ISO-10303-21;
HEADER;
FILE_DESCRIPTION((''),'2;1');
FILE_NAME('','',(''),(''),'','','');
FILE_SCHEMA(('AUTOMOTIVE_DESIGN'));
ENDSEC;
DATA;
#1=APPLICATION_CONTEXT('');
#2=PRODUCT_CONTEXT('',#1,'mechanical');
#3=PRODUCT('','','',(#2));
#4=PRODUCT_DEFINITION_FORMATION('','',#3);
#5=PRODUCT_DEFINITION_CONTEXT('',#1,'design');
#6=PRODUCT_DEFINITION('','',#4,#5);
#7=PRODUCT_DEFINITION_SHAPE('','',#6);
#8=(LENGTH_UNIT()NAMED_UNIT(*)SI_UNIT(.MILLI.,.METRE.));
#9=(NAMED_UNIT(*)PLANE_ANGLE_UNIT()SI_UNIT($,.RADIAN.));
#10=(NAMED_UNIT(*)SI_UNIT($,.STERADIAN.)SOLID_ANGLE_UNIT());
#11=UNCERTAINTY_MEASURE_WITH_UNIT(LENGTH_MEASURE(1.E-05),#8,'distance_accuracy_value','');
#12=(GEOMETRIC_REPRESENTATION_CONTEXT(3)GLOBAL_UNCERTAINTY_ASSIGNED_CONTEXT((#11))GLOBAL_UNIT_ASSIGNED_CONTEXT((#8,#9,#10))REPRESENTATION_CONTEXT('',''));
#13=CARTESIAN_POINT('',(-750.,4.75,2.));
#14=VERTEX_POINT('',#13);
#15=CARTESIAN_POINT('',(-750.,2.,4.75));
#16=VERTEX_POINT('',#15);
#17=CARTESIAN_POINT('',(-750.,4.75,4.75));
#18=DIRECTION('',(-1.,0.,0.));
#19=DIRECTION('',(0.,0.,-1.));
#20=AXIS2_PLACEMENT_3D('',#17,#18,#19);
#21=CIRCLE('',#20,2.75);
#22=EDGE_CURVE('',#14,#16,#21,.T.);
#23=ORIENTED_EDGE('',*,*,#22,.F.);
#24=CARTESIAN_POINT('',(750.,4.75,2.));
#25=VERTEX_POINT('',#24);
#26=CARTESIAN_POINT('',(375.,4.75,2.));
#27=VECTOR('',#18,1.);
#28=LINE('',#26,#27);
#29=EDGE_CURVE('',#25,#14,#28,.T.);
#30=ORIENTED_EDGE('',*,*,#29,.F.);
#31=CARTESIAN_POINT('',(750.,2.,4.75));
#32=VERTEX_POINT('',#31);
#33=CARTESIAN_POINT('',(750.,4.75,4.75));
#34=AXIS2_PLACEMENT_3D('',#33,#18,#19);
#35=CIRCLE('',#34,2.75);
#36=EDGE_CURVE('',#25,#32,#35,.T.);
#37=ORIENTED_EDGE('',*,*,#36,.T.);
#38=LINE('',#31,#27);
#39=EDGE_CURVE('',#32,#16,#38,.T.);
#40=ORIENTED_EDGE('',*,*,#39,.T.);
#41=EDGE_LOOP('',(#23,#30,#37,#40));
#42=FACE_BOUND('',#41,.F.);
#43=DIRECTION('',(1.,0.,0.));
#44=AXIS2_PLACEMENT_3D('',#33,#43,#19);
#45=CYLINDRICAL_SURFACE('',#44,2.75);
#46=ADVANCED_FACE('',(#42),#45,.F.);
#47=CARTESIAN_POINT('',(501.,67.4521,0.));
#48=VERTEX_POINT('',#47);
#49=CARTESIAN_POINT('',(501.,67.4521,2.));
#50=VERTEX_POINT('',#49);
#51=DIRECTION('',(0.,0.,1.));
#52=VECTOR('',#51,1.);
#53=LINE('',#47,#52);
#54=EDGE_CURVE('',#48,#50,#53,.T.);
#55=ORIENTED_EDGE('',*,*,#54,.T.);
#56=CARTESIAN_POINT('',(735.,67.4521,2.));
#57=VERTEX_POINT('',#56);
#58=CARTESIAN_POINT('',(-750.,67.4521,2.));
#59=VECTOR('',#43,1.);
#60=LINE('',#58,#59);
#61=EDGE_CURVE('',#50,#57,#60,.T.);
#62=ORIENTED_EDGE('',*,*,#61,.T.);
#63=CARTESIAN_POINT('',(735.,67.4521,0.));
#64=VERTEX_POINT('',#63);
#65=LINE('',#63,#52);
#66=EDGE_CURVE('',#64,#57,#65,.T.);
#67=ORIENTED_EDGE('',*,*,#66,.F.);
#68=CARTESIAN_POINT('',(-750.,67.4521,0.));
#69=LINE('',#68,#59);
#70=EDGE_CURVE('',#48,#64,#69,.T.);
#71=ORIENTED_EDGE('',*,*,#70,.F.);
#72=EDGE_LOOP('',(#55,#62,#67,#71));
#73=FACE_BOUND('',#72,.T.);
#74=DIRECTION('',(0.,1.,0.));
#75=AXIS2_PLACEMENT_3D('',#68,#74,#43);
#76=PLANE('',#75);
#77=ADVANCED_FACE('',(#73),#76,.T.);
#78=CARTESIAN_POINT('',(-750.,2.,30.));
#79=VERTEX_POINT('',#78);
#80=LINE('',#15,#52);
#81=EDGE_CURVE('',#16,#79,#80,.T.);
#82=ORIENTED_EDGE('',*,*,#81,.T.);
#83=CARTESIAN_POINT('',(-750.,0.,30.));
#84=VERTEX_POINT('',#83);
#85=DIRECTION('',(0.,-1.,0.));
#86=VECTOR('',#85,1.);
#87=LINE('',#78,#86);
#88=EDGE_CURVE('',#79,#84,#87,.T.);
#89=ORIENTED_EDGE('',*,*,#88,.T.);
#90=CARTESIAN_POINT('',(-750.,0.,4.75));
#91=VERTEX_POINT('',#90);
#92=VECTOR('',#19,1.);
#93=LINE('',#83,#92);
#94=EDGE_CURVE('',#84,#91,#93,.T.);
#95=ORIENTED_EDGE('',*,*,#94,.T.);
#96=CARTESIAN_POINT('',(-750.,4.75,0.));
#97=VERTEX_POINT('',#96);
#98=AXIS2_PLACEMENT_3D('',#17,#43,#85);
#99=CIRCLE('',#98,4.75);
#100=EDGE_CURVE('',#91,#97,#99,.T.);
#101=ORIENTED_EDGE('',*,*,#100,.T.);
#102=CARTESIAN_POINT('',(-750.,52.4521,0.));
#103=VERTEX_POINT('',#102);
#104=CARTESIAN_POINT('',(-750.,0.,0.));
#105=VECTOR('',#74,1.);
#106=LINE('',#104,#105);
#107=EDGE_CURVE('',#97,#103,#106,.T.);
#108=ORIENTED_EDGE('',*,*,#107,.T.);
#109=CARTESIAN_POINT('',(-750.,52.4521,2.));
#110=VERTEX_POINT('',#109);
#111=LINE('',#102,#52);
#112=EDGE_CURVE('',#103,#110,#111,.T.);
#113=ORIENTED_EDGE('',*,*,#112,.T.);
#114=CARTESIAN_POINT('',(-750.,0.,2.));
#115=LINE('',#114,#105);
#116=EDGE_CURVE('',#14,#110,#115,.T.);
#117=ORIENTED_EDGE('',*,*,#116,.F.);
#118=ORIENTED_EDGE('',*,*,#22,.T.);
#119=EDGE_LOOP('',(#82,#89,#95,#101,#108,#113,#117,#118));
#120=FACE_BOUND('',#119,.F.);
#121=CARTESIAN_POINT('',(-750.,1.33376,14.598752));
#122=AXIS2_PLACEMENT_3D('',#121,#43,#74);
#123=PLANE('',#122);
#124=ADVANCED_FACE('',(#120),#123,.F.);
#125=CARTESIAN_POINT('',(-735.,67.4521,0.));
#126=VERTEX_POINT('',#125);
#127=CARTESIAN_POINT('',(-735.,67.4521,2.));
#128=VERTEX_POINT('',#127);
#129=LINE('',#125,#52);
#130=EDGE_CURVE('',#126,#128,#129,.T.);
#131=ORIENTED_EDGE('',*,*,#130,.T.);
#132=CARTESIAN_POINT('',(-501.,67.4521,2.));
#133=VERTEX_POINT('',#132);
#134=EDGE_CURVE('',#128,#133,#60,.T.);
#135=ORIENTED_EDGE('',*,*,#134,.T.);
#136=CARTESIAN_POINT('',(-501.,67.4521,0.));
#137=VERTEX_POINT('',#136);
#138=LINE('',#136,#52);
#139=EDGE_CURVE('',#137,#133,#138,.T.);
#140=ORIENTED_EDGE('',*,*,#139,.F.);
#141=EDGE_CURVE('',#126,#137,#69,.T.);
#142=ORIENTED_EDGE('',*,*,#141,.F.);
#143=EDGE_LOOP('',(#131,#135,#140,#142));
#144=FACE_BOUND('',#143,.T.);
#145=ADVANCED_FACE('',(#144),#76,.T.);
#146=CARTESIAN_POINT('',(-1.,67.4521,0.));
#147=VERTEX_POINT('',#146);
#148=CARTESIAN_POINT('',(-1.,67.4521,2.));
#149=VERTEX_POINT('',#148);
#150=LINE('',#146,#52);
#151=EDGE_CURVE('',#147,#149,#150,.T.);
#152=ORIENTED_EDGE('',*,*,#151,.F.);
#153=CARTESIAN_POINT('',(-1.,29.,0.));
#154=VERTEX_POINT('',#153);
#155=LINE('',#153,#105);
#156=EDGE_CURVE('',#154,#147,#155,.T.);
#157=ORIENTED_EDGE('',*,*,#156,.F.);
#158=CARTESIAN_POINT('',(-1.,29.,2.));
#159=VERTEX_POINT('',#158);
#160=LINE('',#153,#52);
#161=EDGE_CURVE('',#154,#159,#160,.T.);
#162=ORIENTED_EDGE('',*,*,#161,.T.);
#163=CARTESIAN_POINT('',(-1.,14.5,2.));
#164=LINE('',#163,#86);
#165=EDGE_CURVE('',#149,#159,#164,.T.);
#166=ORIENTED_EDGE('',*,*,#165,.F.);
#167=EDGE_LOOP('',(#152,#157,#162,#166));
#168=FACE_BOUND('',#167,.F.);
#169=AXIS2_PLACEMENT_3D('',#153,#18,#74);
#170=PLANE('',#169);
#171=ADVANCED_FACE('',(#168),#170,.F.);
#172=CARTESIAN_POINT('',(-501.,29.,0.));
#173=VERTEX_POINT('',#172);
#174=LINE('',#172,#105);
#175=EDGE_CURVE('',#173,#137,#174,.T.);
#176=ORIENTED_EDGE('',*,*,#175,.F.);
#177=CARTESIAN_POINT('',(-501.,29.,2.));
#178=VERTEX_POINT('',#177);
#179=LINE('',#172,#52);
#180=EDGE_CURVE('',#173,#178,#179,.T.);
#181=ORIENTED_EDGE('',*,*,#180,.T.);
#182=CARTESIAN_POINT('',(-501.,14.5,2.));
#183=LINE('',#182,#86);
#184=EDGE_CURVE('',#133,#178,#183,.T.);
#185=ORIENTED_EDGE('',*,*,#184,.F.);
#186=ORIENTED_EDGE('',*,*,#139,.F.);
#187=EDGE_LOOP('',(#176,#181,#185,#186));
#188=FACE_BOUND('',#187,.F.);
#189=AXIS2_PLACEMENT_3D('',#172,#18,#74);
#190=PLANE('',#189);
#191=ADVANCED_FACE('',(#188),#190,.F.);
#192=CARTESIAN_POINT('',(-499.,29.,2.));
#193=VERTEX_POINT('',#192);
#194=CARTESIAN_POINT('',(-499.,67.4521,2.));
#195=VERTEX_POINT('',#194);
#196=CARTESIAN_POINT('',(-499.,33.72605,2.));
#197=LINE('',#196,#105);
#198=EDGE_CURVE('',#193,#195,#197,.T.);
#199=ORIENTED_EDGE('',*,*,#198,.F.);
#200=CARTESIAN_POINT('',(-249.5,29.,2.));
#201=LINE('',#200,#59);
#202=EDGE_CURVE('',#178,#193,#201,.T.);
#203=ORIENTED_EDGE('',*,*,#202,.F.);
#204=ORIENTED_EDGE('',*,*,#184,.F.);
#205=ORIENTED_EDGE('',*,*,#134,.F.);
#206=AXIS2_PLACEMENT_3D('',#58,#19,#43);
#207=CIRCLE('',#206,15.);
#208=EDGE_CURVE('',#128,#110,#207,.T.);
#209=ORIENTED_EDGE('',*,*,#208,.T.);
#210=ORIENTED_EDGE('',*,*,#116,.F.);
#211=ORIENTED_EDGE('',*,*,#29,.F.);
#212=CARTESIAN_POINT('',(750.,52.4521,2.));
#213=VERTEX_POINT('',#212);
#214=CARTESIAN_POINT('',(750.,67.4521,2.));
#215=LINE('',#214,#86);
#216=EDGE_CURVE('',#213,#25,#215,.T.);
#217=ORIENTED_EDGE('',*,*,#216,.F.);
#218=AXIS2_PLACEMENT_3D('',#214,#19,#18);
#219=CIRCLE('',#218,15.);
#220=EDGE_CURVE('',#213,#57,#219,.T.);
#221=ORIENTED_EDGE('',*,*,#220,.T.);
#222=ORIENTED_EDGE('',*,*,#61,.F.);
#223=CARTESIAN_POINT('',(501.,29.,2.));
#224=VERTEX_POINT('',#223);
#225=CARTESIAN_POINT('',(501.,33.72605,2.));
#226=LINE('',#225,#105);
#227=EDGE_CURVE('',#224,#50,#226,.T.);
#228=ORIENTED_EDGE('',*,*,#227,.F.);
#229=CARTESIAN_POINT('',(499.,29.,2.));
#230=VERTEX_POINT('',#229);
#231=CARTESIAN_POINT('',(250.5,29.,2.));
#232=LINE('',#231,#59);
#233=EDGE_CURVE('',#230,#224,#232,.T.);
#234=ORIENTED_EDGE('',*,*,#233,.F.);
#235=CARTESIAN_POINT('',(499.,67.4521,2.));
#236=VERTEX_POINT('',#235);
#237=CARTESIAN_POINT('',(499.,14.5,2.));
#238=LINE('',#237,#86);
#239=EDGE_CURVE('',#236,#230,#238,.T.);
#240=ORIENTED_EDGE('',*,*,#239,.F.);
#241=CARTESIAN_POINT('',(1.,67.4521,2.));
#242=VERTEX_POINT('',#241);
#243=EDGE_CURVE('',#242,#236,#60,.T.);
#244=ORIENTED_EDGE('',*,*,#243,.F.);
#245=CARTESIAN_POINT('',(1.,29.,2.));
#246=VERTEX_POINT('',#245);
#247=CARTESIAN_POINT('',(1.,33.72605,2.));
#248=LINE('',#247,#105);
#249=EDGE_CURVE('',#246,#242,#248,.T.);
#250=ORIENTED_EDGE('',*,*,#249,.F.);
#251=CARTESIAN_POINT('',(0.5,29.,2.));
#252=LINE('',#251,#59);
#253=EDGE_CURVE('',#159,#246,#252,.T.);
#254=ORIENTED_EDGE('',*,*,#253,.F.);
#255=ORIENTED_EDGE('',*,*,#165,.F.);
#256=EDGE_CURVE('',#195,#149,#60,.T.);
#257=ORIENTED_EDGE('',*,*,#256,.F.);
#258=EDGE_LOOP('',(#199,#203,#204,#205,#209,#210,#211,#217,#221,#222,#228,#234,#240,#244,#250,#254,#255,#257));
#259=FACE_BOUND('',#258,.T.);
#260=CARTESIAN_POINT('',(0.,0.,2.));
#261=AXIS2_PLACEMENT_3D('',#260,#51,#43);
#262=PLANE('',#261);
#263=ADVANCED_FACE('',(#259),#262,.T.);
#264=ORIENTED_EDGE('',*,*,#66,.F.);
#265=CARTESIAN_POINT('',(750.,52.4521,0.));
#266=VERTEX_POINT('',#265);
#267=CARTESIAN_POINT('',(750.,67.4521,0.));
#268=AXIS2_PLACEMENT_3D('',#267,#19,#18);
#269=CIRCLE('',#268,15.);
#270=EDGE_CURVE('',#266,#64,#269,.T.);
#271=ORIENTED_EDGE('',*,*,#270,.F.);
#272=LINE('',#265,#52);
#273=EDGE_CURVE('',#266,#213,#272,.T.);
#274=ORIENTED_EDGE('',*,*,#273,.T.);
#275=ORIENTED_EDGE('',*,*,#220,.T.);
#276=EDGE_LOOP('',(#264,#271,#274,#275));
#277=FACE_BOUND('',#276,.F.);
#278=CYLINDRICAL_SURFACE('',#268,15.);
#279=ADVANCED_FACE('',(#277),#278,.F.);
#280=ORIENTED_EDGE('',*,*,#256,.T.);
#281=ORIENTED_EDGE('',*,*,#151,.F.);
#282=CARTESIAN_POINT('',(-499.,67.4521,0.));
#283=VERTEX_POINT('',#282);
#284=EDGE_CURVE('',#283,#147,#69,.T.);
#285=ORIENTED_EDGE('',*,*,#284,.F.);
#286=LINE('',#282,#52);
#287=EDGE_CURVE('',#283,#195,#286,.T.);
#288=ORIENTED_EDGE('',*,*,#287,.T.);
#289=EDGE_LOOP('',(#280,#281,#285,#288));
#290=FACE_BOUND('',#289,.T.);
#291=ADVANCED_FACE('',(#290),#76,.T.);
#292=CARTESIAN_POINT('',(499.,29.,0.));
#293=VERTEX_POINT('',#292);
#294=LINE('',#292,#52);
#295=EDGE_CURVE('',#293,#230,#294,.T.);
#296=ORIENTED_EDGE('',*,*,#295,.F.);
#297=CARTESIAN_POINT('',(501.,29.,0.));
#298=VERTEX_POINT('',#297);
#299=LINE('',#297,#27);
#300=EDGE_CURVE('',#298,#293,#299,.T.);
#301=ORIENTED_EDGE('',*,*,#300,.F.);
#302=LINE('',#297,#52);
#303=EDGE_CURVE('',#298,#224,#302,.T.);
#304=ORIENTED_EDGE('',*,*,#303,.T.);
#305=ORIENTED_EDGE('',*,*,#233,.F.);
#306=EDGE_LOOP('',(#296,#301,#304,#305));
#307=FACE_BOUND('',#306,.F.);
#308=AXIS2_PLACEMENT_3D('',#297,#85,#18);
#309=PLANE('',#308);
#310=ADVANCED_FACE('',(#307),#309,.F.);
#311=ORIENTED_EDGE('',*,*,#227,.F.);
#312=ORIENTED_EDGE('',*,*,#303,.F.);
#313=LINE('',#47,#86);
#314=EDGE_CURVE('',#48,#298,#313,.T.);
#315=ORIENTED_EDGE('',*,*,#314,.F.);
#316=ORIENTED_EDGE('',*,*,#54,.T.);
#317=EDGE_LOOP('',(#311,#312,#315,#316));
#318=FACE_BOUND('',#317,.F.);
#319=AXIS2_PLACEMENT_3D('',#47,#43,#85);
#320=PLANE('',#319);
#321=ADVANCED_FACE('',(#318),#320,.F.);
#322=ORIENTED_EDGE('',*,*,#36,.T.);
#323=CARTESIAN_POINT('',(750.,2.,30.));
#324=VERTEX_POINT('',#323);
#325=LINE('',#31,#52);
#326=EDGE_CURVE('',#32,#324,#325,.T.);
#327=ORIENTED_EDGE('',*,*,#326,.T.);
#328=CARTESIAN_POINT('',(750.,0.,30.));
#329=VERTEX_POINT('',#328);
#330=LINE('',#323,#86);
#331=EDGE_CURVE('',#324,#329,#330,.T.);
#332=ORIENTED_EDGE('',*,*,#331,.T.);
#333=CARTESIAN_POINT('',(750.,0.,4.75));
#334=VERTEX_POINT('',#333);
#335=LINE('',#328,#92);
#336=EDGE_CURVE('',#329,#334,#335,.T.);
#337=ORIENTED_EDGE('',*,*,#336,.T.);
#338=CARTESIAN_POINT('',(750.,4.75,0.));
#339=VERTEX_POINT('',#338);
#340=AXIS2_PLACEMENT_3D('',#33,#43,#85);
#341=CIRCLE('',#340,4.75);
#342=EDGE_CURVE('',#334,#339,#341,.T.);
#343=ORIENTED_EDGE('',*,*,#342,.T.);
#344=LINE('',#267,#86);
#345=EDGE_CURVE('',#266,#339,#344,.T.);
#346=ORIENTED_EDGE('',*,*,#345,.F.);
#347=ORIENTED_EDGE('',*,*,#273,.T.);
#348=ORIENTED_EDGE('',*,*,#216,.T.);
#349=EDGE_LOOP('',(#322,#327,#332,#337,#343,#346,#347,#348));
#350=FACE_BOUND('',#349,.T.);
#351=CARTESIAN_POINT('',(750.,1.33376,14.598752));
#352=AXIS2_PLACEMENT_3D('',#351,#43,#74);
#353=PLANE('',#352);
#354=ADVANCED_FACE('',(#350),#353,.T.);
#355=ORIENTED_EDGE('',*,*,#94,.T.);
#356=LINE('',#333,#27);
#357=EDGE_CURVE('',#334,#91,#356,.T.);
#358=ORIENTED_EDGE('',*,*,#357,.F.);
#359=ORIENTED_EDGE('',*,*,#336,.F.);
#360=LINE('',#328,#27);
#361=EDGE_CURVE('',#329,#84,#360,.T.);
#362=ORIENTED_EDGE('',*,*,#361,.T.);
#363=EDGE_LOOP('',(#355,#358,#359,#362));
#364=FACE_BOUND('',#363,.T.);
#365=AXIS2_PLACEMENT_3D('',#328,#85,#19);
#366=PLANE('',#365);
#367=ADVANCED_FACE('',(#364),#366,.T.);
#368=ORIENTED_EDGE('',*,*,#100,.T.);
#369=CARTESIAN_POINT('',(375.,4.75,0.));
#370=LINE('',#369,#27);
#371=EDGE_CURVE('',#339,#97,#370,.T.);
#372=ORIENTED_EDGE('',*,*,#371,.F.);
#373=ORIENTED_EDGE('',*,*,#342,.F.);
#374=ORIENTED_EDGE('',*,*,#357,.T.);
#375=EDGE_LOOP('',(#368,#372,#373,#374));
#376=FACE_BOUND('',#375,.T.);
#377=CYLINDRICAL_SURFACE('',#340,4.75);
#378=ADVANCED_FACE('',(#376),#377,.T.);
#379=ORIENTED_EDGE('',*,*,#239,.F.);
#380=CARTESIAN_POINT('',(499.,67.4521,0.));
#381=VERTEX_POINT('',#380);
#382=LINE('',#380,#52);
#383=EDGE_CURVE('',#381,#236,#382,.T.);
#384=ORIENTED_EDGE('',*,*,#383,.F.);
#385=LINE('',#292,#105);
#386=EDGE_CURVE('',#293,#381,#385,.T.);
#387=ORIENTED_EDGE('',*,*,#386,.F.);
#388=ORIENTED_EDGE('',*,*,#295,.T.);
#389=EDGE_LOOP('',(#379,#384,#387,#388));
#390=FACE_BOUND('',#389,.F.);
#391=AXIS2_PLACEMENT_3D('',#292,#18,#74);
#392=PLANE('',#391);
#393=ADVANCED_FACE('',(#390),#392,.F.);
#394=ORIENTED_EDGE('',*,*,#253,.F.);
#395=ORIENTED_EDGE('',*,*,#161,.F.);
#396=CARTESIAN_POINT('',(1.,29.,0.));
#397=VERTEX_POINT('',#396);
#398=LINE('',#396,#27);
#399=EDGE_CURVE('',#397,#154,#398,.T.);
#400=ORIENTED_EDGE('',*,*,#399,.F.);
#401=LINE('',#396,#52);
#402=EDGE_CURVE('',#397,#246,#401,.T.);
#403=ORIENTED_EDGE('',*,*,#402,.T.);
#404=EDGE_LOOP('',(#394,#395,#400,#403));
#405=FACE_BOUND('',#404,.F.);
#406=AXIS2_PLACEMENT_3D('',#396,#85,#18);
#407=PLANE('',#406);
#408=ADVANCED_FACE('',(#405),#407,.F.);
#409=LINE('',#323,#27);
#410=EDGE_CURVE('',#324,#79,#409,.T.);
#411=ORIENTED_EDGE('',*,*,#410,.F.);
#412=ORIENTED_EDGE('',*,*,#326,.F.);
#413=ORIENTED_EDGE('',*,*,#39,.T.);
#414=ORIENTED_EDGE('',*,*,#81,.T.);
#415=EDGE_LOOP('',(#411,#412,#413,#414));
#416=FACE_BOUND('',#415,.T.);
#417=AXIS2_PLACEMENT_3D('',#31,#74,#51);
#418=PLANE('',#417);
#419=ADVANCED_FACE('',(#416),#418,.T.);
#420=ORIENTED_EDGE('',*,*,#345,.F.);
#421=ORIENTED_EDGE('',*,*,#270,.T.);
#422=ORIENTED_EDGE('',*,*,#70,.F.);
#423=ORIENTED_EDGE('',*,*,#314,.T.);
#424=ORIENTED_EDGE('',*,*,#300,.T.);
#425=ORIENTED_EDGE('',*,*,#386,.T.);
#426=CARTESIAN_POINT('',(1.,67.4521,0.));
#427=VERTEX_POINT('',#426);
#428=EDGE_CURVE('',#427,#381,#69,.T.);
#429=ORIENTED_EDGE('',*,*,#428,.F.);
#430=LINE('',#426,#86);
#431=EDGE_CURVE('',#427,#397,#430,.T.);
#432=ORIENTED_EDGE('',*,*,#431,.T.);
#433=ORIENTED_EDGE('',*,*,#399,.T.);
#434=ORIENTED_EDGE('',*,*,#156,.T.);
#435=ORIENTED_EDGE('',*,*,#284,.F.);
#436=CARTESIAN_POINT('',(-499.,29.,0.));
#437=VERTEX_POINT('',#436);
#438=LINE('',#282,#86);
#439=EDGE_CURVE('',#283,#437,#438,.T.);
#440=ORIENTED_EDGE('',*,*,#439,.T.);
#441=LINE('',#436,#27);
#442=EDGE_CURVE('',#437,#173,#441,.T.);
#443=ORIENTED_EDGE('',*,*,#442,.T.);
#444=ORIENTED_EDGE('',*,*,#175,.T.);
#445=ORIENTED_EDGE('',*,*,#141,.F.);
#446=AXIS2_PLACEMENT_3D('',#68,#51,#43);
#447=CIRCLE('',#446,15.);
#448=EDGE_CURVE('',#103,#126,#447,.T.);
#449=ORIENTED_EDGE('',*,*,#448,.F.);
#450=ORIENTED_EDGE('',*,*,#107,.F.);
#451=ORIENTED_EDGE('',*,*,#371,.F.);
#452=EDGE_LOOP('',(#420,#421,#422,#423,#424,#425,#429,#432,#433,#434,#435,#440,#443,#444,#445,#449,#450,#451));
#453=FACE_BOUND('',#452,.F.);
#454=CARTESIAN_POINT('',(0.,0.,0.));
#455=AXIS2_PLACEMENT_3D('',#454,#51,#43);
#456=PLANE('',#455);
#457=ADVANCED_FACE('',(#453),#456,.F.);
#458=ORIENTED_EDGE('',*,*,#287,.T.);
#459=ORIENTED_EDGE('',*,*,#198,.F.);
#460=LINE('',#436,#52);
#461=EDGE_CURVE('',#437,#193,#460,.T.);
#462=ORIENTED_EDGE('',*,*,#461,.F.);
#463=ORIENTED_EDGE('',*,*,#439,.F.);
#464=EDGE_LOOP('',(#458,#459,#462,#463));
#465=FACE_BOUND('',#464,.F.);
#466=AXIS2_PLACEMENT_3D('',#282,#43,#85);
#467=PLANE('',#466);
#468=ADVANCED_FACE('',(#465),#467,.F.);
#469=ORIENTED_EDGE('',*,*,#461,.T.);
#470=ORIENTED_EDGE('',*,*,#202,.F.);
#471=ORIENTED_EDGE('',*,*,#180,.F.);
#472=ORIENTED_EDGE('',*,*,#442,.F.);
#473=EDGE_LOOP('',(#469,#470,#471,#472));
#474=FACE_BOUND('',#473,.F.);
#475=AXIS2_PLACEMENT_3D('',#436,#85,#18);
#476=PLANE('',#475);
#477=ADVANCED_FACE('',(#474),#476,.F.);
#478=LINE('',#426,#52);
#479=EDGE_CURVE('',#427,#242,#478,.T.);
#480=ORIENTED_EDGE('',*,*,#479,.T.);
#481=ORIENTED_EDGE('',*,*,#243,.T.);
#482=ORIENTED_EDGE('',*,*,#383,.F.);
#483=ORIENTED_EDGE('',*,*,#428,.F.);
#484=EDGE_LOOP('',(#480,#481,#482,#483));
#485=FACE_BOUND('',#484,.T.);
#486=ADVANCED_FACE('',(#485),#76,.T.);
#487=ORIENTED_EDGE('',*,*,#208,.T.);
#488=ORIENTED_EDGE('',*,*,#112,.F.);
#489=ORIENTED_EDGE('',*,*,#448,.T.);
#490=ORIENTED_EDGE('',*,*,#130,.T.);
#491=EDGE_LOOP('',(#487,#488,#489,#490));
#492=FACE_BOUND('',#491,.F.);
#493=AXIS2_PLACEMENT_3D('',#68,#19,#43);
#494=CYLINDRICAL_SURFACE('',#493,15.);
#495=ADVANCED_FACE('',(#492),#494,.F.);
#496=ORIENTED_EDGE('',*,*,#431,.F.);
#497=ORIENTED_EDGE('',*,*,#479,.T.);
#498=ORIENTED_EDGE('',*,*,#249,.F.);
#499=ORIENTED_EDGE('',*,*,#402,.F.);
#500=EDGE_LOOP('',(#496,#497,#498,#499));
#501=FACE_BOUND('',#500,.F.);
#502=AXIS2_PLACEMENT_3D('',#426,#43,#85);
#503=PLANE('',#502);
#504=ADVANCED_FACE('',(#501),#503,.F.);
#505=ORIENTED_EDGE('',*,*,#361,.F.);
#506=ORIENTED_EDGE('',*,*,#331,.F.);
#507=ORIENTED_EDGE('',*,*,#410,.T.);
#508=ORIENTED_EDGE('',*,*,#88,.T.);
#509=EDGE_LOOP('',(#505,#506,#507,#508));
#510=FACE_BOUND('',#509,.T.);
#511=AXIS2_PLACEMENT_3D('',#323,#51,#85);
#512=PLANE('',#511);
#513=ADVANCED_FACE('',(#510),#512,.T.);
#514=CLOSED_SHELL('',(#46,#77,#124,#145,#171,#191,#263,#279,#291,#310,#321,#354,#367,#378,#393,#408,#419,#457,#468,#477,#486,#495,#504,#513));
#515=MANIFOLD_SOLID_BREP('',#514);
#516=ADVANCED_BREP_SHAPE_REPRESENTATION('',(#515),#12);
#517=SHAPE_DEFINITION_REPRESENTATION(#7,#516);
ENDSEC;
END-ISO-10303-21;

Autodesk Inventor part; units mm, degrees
ref_plane "YZ Plane" through (0, 0, 0) normal (1, 0, 0) x (0, 1, 0)
ref_plane "XZ Plane" through (0, 0, 0) normal (0, 1, 0) x (-1, 0, 0)
ref_plane "XY Plane" through (0, 0, 0) normal (0, 0, 1) x (1, 0, 0)
sketch "Sketch1" plane through (0, 0, 0) normal (0, 0, 1) x (1, 0, 0)
  line L0 (-750, 67.4521) -> (750, 67.4521)
  line L1 (750, 67.4521) -> (750, 0)
  line L2 (750, 0) -> (-750, 0)
  line L3 (-750, 0) -> (-750, 67.4521)
  point P0 (0, 0)
  point P1 (0, 0)
  dimension "d0" = 1500
  dimension "d1" = 67.4521
extrude "Plate1" add sketch "Sketch1" along normal blind 2
sketch "Sketch2" plane through (750, 2, 0) normal (0, -1, 0) x (1, 0, 0)
  line L0 (-1500, 0) -> (0, 0)
  line L1 (0, 0) -> (0, 30)
  line L2 (0, 30) -> (-1500, 30)
  line L3 (-1500, 30) -> (-1500, 0)
edge flange "Flange1" height 30 angle 90 thickness 2 bend radius 2.75 thickness toward (0, -1, 0) relief round relief width 2 relief depth 1 edges at (0, 0, 2) wall of the first edge with corners at (-750, 2, 0) (750, 2, 0) (750, 2, 30) (-750, 2, 30)
bend "Bend1"
corner "Corner1"
sketch "Sketch5" plane through (0, 0, 0) normal (0, 0, -1) x (-1, 0, 0)
  line L0 (750, 67.4521) -> (-750, 67.4521) projected
  line L1 (499, 67.4521) -> (499, 29)
  line L2 (499, 29) -> (501, 29)
  line L3 (501, 29) -> (501, 67.4521)
  line L4 (750, 0) -> (-750, 0) projected
  point P0 (0, 0)
  point P1 (500, 29)
  dimension "d18" = 2
  dimension "d20" = 29
  dimension "d27" = 250
extrude "Extrusion1" cut sketch "Sketch5" against normal through all
pattern_linear "Rectangular Pattern1" count 3 spacing 500 along (1, 0, 0) of "Extrusion1"
sketch "Sketch6" plane through (0, 0, 0) normal (0, 0, -1) x (-1, 0, 0)
  line L0 (-750, 67.4521) -> (-750, 4.75) projected
  circle A0 centre (-750, 67.4521) radius 15
  line L1 (-750, 67.4521) -> (-501, 67.4521) projected
  point P0 (0, 0)
  point P1 (-735, 67.4521)
  point P2 (-750, 52.4521)
  dimension "d24" = 30
extrude "Extrusion2" cut sketch "Sketch6" against normal through all contours L1 A0 L0 picked at (-740.1254, 66.3395)
mirror "Mirror1" about plane through (0, 0, 0) normal (1, 0, 0) of "Extrusion2"
equation "\"d1\" = Стрингер_2"
equation "\"d18\" = Thickness"
equation "\"d2\" = Thickness"
equation "\"d3\" = BendReliefWidth"
equation "\"d4\" = BendReliefDepth"
equation "\"d5\" = MinimumRemnant"
equation "\"d6\" = TransitionRadius"
equation "\"d9\" = BendRadius"
equation "\"d10\" = CornerReliefSize"
equation "\"d11\" = GapSize"
equation "\"d12\" = JacobiRadiusSize"
equation "\"GapSize\" = Thickness"
equation "\"MinimumRemnant\" = 2 * Thickness"
equation "\"BendReliefDepth\" = 0.5 * Thickness"
equation "\"BendReliefWidth\" = Thickness"
equation "\"CornerReliefSize\" = 4 * Thickness"
equation "\"JacobiRadiusSize\" = BendRadius"
equation "\"TransitionRadius\" = BendRadius"
equation "\"qqqqqq\" = 67.35706"
equation "\"Стрингер_2\" = 67.452127"
equation "\"Thickness\" = 2"
equation "\"BendRadius\" = 2.75"
properties part number "МОО 052 стрингер спина 2" material "Stainless Steel"
